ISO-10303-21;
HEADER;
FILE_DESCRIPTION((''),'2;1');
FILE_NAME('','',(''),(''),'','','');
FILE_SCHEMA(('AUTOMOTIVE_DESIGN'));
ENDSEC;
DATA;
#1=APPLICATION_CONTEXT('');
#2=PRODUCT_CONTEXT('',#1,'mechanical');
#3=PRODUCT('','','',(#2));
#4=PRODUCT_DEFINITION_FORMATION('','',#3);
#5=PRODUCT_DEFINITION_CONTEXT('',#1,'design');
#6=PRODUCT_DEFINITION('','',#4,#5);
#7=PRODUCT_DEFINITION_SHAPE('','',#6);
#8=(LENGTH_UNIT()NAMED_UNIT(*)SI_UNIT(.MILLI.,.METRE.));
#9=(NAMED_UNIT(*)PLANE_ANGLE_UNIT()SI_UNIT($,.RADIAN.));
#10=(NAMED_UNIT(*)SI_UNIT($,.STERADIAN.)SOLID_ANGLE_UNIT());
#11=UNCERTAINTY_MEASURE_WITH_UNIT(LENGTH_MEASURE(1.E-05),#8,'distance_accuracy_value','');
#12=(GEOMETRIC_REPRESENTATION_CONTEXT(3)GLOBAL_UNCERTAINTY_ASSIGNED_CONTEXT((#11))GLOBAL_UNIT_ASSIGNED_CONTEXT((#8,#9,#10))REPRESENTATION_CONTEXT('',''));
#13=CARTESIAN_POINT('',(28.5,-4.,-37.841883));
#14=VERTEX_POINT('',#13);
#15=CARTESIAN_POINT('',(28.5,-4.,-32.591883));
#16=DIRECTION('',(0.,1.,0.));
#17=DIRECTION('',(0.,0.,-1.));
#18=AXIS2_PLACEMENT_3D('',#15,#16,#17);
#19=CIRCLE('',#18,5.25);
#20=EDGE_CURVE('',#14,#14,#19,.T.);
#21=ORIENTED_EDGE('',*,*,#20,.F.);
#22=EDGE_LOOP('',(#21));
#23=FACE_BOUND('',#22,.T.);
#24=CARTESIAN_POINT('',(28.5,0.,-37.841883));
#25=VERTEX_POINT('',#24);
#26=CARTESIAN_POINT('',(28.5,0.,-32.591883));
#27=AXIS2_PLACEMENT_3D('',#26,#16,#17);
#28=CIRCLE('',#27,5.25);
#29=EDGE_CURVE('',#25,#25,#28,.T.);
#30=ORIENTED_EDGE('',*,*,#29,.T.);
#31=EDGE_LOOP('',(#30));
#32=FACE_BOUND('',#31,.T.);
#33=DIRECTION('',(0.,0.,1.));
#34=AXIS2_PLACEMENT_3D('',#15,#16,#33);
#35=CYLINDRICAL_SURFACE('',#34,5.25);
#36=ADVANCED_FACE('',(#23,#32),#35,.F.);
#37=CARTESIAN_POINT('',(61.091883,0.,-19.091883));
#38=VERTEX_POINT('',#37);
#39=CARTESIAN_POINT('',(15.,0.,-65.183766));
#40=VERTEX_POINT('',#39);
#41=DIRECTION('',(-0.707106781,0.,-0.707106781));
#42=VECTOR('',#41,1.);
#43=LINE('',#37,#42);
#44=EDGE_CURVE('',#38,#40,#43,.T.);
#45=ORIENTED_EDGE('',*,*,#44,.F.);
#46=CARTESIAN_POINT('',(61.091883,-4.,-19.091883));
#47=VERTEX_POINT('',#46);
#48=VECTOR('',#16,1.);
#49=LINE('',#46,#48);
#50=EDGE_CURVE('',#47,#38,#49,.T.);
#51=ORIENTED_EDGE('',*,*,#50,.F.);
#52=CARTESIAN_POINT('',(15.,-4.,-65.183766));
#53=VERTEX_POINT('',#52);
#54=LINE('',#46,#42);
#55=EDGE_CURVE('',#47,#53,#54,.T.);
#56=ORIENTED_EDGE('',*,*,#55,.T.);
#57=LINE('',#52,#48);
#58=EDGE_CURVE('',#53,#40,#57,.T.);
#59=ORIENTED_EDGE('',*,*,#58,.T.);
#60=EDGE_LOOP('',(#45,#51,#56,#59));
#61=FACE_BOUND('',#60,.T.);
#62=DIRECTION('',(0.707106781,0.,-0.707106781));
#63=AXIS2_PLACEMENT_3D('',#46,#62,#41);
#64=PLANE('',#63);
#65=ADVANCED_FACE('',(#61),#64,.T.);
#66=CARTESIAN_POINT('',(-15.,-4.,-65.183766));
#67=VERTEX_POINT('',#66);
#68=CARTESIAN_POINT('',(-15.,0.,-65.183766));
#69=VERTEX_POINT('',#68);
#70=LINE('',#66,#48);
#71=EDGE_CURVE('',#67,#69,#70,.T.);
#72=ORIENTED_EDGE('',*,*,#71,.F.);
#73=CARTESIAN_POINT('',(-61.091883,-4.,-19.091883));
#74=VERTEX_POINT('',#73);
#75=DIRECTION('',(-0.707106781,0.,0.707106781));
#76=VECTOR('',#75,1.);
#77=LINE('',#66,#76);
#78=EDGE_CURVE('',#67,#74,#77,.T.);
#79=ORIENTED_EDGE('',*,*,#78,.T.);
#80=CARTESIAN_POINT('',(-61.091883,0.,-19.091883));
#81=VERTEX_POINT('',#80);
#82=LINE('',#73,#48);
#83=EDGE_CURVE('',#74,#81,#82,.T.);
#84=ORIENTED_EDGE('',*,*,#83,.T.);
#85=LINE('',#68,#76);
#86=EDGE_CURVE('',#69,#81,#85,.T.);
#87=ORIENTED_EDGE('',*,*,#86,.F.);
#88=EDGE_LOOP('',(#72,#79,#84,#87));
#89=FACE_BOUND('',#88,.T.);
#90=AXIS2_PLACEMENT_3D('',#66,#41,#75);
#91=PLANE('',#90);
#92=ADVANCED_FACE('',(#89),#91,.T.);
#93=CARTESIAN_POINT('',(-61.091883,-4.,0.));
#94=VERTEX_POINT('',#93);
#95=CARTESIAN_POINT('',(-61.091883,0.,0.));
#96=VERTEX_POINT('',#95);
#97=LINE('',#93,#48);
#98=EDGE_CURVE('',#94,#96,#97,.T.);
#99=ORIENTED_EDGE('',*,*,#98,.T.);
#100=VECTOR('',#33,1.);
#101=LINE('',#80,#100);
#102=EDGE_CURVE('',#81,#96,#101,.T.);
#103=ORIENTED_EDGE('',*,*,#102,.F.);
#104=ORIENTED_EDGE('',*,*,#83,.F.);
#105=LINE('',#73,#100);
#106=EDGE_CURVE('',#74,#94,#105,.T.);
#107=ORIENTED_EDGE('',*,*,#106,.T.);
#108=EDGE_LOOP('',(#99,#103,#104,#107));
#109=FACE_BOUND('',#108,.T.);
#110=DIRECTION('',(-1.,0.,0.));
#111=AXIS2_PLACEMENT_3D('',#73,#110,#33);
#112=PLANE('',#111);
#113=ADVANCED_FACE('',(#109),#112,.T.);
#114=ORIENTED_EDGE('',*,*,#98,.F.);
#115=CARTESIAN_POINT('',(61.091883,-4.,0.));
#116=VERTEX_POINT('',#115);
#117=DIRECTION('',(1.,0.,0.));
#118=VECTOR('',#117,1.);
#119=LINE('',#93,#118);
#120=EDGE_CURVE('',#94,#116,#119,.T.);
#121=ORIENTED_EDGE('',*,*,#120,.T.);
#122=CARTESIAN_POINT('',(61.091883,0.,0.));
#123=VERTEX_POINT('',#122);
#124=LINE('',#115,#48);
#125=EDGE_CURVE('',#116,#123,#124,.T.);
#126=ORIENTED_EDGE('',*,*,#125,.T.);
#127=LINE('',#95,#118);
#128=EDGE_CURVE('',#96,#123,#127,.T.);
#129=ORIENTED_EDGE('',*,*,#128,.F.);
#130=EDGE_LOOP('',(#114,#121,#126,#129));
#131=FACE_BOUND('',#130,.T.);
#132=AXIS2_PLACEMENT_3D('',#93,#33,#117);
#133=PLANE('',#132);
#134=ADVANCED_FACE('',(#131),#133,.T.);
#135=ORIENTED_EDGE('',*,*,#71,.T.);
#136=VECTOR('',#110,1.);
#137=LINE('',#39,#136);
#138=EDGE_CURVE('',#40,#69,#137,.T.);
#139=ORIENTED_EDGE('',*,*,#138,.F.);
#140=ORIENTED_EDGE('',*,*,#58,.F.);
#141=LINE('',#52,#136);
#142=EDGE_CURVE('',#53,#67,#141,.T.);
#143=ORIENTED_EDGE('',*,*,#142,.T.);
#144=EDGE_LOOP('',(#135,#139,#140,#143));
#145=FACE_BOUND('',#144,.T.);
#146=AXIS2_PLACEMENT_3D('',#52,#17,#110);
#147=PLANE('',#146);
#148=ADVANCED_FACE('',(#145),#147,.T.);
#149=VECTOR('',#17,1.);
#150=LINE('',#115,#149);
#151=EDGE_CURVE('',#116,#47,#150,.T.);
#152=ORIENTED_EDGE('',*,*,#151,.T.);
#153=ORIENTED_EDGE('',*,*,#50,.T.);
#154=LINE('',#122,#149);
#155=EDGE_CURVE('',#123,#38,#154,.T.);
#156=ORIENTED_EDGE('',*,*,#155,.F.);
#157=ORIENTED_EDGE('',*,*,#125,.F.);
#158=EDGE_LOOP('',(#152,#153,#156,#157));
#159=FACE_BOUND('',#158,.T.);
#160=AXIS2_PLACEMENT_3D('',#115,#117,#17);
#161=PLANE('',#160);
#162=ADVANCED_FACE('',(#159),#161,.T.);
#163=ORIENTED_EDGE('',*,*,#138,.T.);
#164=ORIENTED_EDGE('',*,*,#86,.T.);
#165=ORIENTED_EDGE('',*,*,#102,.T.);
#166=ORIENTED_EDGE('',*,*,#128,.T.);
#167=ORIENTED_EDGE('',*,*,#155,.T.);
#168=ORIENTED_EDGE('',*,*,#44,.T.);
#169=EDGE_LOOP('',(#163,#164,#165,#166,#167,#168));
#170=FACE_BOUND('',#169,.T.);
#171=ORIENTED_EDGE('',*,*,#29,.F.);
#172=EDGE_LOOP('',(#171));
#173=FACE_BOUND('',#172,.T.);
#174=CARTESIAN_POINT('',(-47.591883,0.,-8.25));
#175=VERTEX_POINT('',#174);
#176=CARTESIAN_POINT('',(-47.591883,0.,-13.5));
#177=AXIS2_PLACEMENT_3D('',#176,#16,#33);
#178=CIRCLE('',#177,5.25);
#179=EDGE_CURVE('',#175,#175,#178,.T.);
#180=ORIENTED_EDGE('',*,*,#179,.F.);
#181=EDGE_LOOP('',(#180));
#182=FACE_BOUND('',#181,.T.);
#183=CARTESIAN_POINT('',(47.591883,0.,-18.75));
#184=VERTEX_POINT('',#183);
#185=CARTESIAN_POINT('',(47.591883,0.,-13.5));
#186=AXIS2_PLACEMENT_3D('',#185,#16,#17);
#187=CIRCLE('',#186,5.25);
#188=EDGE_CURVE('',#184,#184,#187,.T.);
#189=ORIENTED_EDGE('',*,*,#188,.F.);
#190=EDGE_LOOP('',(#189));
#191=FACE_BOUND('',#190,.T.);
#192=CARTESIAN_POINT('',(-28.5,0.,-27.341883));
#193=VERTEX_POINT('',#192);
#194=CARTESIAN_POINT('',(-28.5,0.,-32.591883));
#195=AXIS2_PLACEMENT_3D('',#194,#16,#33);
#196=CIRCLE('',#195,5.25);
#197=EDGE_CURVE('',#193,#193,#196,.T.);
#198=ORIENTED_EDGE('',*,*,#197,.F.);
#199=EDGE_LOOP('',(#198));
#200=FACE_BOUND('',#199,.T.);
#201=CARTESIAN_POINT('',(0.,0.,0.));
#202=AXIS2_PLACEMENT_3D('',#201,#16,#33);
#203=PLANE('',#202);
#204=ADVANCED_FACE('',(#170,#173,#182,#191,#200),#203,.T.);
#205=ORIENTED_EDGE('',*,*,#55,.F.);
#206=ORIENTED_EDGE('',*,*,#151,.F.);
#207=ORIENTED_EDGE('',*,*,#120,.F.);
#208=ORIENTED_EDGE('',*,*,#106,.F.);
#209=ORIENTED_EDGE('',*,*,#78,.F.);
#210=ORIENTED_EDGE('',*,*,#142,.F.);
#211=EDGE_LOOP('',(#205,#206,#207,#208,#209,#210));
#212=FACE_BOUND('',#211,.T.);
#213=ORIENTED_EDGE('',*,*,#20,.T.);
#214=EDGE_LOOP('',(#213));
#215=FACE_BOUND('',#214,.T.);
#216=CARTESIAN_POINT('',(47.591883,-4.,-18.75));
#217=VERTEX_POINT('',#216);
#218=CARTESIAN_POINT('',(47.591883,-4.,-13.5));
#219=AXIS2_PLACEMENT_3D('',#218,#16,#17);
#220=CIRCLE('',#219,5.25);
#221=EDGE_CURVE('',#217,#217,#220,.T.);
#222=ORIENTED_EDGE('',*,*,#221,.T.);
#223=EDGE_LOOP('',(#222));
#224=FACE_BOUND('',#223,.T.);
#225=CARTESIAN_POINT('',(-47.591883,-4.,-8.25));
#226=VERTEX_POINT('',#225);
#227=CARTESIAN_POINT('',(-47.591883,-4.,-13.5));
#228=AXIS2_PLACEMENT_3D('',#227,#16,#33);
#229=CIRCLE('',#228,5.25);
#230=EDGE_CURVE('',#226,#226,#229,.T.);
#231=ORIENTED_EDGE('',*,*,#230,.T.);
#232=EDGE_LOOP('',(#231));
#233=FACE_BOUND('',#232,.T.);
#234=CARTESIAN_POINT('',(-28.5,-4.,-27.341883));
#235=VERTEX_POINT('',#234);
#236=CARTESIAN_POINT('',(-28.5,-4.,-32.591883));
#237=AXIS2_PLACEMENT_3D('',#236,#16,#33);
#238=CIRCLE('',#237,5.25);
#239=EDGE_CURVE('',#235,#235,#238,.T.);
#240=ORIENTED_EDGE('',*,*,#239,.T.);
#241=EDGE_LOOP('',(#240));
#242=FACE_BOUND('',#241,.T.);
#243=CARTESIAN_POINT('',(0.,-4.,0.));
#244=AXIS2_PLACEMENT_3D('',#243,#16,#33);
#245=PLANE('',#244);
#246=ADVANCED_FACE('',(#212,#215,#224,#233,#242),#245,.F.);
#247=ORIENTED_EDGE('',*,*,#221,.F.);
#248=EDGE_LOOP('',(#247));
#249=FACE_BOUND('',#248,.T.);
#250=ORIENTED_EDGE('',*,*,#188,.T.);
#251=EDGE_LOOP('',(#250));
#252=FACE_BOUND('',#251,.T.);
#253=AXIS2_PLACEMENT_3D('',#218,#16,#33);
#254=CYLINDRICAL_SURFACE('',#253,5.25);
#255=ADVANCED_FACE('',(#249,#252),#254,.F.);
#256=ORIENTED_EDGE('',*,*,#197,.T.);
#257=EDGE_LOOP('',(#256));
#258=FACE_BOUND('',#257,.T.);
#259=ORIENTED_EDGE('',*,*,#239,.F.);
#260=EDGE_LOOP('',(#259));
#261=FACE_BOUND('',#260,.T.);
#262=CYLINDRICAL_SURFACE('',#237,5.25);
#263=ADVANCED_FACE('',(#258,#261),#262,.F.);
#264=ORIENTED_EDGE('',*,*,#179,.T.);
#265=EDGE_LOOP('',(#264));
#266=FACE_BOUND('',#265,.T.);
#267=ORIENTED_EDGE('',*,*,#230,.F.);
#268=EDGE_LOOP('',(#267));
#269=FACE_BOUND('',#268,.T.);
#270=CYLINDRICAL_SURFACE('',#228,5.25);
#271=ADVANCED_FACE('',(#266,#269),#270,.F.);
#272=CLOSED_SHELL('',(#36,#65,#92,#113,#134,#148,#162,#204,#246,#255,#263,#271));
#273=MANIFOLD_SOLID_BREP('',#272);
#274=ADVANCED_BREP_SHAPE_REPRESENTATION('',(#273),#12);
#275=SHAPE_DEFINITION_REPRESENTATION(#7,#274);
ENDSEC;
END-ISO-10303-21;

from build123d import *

# Parameters (mm, degrees)
SKETCH_1_R             = 5.25
SM_BASE_FLANGE_1_DEPTH = 4


# Sheet-metal steps are written as plain solids
with BuildPart() as part:
    # Sketch 1 → Базовая кромка1 (new body)
    with BuildSketch(Plane(origin=(0, 0, 0), x_dir=(1, 0, 0), z_dir=(0, 1, 0))):
        Polygon((-61.091883092, 0), (61.091883092, 0), (61.091883092, 19.091883092), (15, 65.183766184), (-15, 65.183766184), (-61.091883092, 19.091883092), align=None)
        with Locations(Location((-28.5, 32.591883092, 0), (0, 0, 270))):
            Circle(SKETCH_1_R, mode=Mode.SUBTRACT)
        with Locations(Location((-47.591883092, 13.5, 0), (0, 0, 270))):
            Circle(SKETCH_1_R, mode=Mode.SUBTRACT)
        with Locations(Location((47.591883092, 13.5, 0), (0, 0, 90))):
            Circle(SKETCH_1_R, mode=Mode.SUBTRACT)
        with Locations(Location((28.5, 32.591883092, 0), (0, 0, 90))):
            Circle(SKETCH_1_R, mode=Mode.SUBTRACT)
    extrude(amount=-SM_BASE_FLANGE_1_DEPTH)


solid = part.part
